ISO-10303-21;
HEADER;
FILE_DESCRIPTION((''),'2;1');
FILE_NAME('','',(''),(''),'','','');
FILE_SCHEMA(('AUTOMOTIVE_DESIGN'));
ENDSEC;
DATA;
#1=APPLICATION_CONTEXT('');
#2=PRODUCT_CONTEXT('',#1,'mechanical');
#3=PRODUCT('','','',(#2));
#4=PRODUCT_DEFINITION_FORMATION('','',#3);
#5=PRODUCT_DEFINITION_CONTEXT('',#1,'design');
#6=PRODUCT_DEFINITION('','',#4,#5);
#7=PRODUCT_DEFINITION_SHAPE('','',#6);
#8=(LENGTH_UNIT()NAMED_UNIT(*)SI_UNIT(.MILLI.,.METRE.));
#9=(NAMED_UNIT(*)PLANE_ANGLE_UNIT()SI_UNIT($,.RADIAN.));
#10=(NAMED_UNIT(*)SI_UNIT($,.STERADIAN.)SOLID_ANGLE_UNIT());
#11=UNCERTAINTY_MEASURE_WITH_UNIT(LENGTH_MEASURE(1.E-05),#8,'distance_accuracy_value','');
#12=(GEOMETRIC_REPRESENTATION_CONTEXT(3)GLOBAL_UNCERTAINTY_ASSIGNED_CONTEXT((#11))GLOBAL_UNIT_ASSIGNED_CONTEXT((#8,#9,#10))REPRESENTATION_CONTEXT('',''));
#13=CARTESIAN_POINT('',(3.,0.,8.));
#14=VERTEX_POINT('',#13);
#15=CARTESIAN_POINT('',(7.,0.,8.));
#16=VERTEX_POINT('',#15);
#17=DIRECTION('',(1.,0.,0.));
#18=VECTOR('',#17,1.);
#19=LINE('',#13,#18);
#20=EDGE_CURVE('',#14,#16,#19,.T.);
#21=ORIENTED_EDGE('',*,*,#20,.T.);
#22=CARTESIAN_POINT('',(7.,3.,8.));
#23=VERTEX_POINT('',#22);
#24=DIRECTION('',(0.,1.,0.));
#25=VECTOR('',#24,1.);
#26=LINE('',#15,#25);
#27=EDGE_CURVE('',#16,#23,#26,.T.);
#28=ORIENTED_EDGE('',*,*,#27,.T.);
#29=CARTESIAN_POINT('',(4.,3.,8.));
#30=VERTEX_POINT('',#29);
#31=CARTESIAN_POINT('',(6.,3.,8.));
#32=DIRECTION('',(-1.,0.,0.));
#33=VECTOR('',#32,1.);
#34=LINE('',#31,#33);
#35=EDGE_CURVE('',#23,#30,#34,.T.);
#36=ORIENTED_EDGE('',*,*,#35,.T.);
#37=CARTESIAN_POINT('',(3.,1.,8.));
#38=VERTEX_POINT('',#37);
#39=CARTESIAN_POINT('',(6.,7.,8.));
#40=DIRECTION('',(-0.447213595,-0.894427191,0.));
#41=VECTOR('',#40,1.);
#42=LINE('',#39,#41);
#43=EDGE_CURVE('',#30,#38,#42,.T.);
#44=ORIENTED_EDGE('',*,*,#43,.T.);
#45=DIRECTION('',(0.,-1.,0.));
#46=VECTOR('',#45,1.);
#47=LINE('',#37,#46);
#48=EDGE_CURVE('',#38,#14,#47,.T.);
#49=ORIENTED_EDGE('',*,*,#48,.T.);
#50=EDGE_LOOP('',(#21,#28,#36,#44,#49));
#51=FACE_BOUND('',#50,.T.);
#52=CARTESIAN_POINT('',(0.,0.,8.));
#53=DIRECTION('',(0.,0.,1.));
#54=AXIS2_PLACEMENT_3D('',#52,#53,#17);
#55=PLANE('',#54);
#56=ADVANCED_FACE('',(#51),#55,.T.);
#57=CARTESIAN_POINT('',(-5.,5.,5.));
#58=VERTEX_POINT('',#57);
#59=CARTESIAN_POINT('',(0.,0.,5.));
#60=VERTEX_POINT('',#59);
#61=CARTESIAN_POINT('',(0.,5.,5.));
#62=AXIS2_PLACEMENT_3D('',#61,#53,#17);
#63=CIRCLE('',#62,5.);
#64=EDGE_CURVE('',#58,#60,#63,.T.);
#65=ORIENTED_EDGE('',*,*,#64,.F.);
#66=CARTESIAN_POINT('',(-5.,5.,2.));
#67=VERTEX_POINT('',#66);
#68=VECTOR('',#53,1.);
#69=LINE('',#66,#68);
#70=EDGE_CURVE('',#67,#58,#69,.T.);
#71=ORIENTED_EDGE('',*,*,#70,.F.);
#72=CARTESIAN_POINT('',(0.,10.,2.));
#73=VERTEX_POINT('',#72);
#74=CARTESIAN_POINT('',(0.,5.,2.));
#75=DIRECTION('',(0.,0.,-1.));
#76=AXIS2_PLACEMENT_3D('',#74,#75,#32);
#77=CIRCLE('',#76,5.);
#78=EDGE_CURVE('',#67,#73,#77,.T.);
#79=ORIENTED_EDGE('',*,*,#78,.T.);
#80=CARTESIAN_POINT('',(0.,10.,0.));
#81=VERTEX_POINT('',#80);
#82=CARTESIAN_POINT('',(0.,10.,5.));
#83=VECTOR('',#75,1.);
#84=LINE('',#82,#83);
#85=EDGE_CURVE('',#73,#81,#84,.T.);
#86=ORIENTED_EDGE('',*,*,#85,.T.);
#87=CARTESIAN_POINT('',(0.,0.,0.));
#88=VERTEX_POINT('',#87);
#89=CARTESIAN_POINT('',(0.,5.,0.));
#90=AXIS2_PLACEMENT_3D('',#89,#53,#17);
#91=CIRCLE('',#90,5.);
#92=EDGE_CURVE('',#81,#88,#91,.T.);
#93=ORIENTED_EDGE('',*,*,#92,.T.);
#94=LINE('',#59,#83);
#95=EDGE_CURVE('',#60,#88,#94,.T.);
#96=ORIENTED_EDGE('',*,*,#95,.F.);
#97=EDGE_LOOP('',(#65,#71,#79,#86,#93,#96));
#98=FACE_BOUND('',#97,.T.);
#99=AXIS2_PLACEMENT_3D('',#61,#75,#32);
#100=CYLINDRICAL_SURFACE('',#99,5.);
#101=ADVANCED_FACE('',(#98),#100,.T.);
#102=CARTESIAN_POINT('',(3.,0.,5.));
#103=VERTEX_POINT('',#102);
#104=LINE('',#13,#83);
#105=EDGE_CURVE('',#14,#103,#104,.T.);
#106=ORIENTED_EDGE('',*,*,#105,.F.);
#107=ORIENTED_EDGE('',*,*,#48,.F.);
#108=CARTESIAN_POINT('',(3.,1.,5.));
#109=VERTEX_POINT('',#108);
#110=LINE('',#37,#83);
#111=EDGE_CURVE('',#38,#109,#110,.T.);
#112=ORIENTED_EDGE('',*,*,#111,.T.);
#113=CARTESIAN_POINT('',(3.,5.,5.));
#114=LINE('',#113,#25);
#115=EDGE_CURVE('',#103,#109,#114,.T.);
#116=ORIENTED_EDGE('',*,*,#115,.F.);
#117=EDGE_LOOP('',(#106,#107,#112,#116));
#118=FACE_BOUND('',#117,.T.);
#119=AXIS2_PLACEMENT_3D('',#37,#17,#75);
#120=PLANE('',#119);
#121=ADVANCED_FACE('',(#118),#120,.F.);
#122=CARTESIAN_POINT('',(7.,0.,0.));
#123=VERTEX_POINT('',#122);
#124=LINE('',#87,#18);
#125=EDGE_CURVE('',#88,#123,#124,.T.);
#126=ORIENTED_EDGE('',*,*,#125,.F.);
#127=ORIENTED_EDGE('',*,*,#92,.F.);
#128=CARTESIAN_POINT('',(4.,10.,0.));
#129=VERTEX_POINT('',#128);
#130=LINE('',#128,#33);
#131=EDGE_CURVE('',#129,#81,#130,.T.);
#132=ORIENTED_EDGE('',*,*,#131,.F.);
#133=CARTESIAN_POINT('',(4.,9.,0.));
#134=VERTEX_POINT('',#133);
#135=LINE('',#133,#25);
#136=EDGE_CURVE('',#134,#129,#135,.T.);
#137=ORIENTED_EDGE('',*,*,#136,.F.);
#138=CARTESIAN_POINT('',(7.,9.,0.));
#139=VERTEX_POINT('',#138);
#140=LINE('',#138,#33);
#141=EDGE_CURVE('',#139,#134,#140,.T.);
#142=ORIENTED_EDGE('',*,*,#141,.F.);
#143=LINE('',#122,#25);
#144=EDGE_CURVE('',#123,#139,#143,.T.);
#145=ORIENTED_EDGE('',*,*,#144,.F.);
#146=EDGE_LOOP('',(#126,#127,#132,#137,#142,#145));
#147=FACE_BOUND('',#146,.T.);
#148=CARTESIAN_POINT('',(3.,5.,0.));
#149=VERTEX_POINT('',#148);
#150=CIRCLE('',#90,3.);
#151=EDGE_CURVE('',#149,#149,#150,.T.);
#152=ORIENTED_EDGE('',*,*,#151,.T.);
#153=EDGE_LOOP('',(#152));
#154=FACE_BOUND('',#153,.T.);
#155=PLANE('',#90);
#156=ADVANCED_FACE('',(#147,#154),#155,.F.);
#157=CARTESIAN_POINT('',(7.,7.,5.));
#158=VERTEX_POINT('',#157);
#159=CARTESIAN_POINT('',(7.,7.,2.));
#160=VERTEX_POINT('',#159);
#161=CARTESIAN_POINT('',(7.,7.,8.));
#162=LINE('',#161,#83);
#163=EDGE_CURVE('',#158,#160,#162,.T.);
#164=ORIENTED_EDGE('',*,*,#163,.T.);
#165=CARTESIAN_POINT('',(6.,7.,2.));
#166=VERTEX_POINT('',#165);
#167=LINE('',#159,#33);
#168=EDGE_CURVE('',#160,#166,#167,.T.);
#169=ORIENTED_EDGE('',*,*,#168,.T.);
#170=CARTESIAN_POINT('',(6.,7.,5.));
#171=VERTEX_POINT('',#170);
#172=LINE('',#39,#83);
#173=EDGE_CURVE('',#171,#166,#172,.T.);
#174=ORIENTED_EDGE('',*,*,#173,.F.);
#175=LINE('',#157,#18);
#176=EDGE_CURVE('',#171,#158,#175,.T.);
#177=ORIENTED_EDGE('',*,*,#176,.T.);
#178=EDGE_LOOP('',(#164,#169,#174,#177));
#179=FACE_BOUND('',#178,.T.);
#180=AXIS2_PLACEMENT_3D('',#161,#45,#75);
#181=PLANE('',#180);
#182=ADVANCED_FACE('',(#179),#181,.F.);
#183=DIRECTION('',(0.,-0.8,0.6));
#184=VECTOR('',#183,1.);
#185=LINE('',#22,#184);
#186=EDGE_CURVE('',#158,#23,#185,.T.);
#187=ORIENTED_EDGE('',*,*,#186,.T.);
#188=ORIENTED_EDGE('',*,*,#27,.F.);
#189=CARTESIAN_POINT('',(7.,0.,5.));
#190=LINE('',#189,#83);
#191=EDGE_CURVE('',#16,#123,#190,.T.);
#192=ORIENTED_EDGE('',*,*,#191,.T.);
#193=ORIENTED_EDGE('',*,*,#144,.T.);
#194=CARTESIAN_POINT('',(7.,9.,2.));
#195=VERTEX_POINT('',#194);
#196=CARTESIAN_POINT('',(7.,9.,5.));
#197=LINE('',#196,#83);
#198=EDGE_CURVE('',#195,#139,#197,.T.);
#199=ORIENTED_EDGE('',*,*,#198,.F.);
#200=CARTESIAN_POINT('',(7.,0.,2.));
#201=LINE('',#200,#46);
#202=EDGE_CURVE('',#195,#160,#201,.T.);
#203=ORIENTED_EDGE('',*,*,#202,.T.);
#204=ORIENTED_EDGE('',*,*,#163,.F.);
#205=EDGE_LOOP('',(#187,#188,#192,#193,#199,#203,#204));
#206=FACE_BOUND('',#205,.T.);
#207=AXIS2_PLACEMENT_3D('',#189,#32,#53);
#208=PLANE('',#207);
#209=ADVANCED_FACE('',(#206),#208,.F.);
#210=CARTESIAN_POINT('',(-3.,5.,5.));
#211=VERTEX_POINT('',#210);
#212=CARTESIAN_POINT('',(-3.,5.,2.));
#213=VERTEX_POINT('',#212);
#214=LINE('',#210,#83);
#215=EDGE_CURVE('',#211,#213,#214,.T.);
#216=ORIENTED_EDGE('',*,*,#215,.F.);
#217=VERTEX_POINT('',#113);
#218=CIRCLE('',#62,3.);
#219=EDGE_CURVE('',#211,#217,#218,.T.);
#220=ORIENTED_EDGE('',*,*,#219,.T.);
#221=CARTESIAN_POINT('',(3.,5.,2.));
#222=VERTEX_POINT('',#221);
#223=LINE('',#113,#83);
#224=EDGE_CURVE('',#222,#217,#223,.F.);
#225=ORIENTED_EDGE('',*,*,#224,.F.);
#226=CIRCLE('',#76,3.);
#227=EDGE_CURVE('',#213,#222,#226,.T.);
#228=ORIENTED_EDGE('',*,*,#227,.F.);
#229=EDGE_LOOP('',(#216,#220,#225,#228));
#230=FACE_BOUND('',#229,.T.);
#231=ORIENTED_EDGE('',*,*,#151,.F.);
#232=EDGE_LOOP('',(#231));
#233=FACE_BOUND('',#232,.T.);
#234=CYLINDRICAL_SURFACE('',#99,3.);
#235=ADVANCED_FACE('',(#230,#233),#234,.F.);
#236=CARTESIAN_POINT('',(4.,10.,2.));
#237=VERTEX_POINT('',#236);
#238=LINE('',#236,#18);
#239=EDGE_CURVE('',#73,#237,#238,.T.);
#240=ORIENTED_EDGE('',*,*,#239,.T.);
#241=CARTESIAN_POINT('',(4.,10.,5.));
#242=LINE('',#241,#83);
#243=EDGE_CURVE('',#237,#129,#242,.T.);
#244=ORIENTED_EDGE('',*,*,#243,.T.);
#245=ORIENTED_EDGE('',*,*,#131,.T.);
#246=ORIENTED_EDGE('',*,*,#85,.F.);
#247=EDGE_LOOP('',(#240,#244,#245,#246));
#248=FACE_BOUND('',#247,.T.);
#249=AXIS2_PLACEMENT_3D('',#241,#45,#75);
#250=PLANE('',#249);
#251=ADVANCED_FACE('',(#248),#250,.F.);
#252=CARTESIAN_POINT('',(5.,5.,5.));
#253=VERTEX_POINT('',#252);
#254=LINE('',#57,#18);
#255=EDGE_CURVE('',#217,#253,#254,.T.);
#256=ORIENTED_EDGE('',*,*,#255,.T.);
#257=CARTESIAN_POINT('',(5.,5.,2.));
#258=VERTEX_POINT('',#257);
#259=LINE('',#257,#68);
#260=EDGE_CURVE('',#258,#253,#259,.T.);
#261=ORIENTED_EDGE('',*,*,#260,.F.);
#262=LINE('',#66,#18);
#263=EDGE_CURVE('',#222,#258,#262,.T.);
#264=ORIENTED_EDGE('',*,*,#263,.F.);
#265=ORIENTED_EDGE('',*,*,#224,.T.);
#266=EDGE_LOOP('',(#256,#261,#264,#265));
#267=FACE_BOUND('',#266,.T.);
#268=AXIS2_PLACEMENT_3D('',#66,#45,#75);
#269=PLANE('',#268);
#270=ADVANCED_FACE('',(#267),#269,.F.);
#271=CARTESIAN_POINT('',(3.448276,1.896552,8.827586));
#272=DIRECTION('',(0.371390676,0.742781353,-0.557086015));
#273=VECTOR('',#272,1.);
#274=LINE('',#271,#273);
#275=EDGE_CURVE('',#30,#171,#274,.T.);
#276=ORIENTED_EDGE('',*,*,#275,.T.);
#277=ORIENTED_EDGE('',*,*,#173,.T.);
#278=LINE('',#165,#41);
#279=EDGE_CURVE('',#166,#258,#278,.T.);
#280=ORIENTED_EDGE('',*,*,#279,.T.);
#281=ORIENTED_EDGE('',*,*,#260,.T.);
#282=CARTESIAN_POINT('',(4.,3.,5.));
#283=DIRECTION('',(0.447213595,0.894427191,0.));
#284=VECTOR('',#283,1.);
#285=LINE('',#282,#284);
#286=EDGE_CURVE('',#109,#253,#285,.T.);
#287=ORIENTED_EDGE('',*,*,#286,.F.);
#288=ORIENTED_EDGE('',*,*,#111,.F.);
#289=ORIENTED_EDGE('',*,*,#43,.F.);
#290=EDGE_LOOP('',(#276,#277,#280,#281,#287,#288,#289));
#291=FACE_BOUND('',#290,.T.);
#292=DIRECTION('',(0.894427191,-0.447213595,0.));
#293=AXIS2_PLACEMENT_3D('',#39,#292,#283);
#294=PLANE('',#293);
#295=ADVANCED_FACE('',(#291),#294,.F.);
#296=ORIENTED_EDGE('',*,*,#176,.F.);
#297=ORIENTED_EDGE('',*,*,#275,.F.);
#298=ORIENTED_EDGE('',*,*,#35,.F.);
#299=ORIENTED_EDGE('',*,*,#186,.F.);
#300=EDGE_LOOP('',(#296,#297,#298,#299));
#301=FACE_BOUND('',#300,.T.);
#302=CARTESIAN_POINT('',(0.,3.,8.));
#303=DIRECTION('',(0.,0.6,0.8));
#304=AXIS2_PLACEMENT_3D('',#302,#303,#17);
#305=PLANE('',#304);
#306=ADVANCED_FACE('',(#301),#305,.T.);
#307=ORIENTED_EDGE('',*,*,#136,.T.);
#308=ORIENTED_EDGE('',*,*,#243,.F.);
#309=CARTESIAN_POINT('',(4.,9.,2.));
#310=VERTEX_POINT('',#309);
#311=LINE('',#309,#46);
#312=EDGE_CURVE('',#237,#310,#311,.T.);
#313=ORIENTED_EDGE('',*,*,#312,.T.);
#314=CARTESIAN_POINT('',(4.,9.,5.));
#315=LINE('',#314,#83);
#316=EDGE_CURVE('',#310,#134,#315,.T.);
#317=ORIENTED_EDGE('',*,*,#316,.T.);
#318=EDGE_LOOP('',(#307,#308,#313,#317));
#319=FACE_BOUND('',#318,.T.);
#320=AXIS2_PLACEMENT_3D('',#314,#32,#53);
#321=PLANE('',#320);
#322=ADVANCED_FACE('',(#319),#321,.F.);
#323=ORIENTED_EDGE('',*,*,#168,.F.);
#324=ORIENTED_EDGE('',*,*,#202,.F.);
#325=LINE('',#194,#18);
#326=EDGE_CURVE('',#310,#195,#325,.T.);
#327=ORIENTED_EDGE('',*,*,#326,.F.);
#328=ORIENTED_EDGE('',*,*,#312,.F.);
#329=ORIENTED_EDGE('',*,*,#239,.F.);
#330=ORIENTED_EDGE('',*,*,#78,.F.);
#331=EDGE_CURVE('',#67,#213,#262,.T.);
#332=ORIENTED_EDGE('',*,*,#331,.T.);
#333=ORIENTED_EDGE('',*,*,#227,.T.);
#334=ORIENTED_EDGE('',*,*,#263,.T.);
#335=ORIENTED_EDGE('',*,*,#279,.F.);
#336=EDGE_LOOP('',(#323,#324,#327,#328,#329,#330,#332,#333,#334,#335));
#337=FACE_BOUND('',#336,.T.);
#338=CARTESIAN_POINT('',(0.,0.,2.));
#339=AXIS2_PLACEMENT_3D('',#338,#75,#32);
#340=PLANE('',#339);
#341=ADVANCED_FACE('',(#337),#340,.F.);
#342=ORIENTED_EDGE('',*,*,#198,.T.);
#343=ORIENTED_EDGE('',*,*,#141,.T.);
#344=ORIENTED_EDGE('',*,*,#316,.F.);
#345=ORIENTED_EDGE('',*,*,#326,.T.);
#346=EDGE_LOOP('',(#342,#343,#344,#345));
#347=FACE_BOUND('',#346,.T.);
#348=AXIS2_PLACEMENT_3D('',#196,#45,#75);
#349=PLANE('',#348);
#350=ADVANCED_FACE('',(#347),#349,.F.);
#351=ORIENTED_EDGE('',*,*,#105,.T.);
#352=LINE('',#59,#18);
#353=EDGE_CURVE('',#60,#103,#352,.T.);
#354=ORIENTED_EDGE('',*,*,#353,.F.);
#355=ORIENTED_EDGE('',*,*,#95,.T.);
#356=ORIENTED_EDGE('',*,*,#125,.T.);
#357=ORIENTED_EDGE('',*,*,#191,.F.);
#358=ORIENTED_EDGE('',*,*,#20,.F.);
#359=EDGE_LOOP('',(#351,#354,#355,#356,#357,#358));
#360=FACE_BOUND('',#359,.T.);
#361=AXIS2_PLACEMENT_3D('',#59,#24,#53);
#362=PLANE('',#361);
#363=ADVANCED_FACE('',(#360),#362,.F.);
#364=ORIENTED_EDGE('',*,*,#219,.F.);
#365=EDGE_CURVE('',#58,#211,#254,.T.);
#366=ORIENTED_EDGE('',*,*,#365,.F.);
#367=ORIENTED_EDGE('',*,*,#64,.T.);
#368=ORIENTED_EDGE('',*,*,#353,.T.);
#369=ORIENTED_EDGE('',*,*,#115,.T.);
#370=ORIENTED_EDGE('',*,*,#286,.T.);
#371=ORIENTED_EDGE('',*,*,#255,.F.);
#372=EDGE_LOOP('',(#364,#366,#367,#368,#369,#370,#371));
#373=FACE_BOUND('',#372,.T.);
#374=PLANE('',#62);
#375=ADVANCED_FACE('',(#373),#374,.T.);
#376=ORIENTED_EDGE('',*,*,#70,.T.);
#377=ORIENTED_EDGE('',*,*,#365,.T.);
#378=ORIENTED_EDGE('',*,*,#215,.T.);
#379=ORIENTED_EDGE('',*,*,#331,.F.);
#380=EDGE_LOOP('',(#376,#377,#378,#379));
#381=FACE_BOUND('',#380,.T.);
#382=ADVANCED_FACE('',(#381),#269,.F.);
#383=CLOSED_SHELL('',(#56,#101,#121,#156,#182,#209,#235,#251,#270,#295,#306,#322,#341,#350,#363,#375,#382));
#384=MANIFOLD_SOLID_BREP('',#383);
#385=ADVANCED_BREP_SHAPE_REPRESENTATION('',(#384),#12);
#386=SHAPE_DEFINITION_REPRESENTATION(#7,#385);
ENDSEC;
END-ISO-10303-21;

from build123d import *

# Parameters (mm, degrees)
SKETCH1_R           = 3
BOSS_EXTRUDE1_DEPTH = 5
SKETCH2_W           = 14.277681963
SKETCH2_H           = 5.610279578
CUT_EXTRUDE1_DEPTH  = 3
BOSS_EXTRUDE2_DEPTH = 6
CHAMFER1_SIZE       = 3
CHAMFER1_SIZE2      = 4


with BuildPart() as part:
    # Sketch1 → Boss-Extrude1 (new body)
    with BuildSketch(Plane.XY):
        with BuildLine():
            Line((0, 0), (7, 0))
            Line((7, 0), (7, 9))
            Line((7, 9), (4, 9))
            Line((4, 9), (4, 10))
            Line((4, 10), (0, 10))
            ThreePointArc((0, 10), (-5, 5), (0, 0))
        make_face()
        with Locations((0, 5)):
            Circle(SKETCH1_R, mode=Mode.SUBTRACT)
    extrude(amount=BOSS_EXTRUDE1_DEPTH)

    # Sketch2 → Cut-Extrude1 (cut)
    with BuildSketch(Plane.XY.offset(5)):
        with Locations((2.138840982, 7.805139789)):
            Rectangle(SKETCH2_W, SKETCH2_H)
    extrude(amount=-CUT_EXTRUDE1_DEPTH, mode=Mode.SUBTRACT)

    # Sketch3 → Boss-Extrude2 (add)
    with BuildSketch(Plane.XY.offset(2)):
        Polygon((7, 7), (6, 7), (3, 1), (3, 0), (7, 0), align=None)
    extrude(amount=BOSS_EXTRUDE2_DEPTH)

    # Chamfer1
    chamfer1_edges = [part.edges().sort_by_distance(p)[0] for p in [
        (6.5, 7, 8),
    ]]
    chamfer1_side = [part.faces().sort_by_distance(p)[0] for p in [
        (6.5, 7, 5),
    ]]
    chamfer(chamfer1_edges, length=CHAMFER1_SIZE, length2=CHAMFER1_SIZE2, reference=chamfer1_side[0])


solid = part.part
